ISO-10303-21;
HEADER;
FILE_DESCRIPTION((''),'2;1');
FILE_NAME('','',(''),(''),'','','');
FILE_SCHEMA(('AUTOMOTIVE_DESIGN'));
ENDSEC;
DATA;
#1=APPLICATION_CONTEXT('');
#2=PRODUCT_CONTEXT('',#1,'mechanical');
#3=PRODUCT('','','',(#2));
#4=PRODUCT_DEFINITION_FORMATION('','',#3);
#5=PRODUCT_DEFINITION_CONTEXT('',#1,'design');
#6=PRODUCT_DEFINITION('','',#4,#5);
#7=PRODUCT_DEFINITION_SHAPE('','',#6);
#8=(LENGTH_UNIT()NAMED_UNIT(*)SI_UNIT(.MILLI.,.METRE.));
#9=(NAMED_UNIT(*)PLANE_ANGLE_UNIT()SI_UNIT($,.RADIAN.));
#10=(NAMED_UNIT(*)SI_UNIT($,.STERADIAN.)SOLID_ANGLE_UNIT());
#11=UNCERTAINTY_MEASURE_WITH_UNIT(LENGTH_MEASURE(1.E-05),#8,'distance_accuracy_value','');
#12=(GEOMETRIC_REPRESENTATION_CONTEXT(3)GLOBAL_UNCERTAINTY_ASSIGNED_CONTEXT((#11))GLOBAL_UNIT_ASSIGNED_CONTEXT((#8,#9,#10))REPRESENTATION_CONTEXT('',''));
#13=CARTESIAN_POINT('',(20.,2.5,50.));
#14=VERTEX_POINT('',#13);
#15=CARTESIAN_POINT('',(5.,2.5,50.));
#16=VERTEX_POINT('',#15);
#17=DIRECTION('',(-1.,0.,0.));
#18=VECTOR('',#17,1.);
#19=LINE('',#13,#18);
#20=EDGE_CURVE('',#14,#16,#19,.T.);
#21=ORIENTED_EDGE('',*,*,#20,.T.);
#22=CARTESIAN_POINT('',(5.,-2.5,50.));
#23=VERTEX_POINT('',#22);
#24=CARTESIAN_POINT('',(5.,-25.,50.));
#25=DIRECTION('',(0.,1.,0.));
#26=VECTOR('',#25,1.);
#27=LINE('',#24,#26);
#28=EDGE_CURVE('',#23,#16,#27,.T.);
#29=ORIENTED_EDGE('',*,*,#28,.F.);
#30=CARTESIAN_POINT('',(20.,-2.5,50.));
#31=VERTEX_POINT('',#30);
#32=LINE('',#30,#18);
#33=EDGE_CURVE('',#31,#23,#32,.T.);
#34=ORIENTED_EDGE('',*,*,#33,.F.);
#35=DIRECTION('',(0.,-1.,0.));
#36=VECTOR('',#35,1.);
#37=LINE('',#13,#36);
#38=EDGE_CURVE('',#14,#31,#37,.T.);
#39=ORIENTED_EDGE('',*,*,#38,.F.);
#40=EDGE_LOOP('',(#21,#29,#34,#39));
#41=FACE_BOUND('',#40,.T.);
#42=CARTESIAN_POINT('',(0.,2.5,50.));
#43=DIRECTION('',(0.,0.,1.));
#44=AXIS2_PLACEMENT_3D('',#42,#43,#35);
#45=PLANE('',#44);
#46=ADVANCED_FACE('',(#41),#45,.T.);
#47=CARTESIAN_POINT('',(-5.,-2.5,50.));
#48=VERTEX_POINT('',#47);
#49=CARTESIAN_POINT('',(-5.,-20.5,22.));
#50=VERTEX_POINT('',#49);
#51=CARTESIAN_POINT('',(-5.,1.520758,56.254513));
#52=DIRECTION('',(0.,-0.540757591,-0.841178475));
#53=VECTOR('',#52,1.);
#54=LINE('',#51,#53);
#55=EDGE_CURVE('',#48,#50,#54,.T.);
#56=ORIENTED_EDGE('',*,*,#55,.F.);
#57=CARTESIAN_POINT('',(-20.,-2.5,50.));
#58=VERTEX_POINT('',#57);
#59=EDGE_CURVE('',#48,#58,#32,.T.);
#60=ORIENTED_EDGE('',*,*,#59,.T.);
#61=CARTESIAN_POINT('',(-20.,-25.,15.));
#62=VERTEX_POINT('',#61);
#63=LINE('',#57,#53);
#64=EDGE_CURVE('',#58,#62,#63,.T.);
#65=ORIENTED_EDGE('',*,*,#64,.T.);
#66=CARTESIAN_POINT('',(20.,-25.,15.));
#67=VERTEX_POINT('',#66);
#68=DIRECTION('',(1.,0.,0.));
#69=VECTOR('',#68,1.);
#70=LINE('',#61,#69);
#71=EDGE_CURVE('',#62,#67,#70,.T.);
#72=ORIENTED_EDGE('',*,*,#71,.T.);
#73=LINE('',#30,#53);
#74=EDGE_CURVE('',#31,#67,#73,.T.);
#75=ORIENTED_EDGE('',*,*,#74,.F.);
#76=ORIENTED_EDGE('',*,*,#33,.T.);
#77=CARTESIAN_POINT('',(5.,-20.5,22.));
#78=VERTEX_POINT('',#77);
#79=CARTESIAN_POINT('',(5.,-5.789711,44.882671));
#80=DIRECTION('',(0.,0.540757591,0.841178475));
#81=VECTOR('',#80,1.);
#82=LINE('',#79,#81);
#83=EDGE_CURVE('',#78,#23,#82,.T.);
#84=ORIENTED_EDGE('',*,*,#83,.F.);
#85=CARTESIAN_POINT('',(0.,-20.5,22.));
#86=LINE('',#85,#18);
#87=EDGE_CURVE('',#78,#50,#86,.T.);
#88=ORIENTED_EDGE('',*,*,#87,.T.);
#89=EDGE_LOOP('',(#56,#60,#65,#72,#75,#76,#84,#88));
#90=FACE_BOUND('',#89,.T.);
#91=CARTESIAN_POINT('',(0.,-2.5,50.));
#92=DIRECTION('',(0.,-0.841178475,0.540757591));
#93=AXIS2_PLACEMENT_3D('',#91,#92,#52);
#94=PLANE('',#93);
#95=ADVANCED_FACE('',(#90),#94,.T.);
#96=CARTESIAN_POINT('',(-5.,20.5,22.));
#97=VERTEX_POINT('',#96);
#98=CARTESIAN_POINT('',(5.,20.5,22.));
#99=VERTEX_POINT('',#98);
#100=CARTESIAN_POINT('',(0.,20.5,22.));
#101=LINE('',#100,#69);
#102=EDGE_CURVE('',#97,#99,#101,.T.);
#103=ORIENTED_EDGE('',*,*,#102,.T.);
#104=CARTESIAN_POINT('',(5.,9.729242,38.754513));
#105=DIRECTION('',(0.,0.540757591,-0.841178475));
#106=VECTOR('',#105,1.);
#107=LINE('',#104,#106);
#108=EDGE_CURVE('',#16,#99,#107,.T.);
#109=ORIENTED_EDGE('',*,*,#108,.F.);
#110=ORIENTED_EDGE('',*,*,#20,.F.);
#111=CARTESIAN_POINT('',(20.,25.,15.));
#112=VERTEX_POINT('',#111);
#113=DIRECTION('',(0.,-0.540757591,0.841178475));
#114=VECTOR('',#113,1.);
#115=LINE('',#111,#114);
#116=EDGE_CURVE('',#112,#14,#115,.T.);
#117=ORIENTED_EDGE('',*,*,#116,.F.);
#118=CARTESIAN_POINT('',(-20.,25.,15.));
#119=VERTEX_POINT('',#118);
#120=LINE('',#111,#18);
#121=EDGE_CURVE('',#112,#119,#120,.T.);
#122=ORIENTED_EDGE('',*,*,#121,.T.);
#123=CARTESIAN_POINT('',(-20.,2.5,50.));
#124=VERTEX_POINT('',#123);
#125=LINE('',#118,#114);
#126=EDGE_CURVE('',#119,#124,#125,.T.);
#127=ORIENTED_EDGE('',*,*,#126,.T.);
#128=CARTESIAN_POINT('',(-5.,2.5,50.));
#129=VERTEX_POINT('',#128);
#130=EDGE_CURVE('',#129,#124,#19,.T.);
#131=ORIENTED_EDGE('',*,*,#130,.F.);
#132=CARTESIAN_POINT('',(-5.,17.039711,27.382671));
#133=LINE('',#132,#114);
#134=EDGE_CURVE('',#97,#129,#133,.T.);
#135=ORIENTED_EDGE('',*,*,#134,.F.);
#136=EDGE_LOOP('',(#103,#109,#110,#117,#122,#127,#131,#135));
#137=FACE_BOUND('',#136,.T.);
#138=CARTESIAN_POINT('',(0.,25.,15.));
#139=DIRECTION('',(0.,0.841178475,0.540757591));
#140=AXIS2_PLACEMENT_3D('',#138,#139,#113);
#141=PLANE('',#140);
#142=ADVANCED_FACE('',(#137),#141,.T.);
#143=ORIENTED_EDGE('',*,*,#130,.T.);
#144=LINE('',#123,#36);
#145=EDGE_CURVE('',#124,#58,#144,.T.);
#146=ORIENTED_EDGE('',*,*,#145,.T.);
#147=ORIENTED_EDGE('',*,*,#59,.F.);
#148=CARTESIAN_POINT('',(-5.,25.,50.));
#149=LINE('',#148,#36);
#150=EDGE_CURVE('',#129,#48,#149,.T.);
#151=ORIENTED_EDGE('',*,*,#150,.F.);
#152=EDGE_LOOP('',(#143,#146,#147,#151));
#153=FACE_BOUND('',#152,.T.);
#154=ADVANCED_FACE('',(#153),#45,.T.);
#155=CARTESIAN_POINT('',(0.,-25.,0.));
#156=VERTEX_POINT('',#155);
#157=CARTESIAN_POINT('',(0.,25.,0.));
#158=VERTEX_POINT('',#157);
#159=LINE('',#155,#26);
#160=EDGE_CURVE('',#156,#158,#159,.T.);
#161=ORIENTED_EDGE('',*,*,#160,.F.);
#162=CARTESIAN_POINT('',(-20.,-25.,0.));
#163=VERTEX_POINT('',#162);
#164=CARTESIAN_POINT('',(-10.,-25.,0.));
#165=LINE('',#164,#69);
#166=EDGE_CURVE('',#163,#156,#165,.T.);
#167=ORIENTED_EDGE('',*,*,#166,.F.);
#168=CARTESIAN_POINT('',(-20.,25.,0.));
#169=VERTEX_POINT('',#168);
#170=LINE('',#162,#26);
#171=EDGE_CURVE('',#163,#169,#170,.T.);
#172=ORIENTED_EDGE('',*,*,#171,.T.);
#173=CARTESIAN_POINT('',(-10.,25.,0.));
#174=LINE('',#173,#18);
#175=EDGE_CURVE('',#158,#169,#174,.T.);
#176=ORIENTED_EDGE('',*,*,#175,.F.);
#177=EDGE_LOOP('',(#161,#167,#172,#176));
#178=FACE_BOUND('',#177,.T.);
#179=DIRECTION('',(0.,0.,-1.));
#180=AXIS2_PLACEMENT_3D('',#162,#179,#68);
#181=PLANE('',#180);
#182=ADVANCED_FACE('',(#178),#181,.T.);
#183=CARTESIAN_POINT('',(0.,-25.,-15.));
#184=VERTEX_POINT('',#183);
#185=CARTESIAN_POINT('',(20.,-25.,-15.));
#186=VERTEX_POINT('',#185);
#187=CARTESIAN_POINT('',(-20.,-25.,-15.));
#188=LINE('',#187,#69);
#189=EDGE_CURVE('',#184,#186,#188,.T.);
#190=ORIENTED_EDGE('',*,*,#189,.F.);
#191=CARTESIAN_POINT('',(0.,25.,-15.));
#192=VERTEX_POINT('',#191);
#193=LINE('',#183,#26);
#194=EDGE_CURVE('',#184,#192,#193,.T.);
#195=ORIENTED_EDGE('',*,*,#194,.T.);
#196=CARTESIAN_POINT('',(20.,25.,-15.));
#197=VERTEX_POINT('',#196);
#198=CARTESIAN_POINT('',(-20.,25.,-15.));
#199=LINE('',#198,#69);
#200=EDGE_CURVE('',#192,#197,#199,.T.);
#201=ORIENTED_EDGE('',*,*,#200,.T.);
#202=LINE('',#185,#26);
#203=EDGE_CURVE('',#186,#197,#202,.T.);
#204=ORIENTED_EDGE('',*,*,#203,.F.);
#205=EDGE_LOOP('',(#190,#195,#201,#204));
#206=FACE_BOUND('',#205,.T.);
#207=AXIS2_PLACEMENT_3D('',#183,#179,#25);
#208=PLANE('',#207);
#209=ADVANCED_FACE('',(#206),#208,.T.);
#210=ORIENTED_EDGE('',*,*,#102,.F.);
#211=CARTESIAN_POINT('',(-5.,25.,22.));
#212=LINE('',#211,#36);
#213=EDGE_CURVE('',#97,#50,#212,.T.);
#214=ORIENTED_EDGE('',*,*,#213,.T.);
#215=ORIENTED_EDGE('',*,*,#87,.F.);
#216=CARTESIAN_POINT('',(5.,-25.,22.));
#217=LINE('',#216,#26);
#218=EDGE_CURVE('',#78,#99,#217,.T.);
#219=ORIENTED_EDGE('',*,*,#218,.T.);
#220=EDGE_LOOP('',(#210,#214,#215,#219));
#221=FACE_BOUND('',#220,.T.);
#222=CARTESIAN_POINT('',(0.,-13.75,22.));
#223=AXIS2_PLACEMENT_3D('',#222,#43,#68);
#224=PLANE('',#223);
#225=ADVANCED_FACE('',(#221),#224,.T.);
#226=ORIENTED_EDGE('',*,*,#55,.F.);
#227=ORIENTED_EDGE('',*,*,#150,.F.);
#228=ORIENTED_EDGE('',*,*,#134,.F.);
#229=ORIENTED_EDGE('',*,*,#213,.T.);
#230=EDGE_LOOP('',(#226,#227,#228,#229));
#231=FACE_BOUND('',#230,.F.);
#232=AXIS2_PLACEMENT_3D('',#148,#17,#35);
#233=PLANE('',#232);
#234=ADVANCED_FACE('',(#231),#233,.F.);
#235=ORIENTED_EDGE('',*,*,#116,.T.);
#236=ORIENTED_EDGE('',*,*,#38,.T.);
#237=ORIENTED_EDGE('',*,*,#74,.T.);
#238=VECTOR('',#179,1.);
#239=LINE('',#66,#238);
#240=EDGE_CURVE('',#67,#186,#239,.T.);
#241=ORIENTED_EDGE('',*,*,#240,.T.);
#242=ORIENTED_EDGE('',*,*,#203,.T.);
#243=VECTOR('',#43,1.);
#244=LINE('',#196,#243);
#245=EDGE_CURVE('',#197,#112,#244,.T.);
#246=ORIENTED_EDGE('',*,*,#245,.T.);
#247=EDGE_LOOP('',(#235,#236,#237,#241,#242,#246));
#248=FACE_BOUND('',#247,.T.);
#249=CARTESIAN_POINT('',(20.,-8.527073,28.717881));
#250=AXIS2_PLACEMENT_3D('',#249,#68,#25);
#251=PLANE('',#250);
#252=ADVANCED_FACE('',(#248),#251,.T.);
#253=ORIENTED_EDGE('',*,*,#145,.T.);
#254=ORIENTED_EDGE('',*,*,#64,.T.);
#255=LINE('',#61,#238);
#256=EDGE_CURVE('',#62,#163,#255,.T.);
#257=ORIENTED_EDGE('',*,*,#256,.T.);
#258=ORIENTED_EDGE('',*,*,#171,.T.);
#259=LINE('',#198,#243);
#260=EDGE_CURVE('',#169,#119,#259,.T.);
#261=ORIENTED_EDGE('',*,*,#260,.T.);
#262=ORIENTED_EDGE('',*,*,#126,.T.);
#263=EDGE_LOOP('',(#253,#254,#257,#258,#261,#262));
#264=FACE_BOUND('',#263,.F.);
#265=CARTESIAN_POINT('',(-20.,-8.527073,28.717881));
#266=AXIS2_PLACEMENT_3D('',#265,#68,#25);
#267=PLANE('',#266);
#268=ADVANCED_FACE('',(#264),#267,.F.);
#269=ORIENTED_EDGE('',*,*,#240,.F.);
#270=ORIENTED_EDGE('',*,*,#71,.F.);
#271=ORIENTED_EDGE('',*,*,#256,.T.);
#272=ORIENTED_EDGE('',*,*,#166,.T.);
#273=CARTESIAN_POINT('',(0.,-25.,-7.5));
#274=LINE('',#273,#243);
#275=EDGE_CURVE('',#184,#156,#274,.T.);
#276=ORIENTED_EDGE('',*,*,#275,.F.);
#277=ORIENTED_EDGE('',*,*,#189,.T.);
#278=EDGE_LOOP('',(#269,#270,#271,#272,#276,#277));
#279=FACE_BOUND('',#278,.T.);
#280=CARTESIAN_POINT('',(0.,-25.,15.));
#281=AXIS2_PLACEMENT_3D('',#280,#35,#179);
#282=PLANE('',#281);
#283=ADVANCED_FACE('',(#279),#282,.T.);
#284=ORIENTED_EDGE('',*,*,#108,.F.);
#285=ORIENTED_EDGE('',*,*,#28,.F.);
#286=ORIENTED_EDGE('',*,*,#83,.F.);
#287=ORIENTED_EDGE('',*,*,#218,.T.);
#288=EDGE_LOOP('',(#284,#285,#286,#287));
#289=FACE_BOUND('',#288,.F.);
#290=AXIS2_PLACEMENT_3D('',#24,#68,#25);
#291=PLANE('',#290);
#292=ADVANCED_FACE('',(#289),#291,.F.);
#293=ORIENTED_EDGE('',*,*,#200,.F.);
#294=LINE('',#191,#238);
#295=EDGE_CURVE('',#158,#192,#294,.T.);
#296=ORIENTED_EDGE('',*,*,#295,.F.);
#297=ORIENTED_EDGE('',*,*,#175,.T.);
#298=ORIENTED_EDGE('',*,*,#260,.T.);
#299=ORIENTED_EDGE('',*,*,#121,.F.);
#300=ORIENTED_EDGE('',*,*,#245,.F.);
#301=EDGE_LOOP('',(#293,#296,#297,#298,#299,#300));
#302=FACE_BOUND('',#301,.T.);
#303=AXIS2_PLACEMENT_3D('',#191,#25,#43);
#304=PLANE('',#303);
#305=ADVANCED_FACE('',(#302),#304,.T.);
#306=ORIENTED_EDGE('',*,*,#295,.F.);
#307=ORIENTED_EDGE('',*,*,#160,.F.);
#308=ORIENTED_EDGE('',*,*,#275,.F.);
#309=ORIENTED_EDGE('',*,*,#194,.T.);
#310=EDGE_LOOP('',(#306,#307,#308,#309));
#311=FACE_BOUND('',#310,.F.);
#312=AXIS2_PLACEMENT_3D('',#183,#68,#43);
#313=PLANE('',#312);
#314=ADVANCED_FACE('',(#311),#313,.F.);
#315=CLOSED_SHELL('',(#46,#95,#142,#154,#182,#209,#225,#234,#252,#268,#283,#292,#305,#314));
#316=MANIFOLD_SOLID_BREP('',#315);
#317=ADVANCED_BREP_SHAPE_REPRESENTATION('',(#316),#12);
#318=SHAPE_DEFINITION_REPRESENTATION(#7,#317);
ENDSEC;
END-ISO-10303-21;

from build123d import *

# Parameters (mm, degrees)
F1_DEPTH = 20
F2_W     = 20
F2_H     = 15
F3_DEPTH = 50.001
F4_W     = 10
F4_H     = 22.5
F4_H_2   = 5
F5_DEPTH = 28


with BuildPart() as f1:
    # F0 (on Right) → F1 (new body, symmetric)
    with BuildSketch(Plane.YZ):
        Polygon((-25, 15), (0, 15), (0, 50), (-2.5, 50), align=None)
        Polygon((25, -15), (25, 15), (0, 15), (-25, 15), (-25, -15), align=None)
        Polygon((0, 15), (25, 15), (2.5, 50), (0, 50), align=None)
    extrude(amount=F1_DEPTH, both=True)

    # F2 (on face) → F3 (cut, through all)
    with BuildSketch(Plane.XZ.offset(25)):
        with Locations((-10, -7.5)):
            Rectangle(F2_W, F2_H)
    extrude(amount=-F3_DEPTH, mode=Mode.SUBTRACT)

    # F4 (on face) → F5 (cut)
    with BuildSketch(Plane.XY.offset(50)):
        with Locations((0, -13.75)):
            Rectangle(F4_W, F4_H)
        Rectangle(F4_W, F4_H_2)
        with Locations((0, 13.75)):
            Rectangle(F4_W, F4_H)
    extrude(amount=-F5_DEPTH, mode=Mode.SUBTRACT)


solid = f1.part
